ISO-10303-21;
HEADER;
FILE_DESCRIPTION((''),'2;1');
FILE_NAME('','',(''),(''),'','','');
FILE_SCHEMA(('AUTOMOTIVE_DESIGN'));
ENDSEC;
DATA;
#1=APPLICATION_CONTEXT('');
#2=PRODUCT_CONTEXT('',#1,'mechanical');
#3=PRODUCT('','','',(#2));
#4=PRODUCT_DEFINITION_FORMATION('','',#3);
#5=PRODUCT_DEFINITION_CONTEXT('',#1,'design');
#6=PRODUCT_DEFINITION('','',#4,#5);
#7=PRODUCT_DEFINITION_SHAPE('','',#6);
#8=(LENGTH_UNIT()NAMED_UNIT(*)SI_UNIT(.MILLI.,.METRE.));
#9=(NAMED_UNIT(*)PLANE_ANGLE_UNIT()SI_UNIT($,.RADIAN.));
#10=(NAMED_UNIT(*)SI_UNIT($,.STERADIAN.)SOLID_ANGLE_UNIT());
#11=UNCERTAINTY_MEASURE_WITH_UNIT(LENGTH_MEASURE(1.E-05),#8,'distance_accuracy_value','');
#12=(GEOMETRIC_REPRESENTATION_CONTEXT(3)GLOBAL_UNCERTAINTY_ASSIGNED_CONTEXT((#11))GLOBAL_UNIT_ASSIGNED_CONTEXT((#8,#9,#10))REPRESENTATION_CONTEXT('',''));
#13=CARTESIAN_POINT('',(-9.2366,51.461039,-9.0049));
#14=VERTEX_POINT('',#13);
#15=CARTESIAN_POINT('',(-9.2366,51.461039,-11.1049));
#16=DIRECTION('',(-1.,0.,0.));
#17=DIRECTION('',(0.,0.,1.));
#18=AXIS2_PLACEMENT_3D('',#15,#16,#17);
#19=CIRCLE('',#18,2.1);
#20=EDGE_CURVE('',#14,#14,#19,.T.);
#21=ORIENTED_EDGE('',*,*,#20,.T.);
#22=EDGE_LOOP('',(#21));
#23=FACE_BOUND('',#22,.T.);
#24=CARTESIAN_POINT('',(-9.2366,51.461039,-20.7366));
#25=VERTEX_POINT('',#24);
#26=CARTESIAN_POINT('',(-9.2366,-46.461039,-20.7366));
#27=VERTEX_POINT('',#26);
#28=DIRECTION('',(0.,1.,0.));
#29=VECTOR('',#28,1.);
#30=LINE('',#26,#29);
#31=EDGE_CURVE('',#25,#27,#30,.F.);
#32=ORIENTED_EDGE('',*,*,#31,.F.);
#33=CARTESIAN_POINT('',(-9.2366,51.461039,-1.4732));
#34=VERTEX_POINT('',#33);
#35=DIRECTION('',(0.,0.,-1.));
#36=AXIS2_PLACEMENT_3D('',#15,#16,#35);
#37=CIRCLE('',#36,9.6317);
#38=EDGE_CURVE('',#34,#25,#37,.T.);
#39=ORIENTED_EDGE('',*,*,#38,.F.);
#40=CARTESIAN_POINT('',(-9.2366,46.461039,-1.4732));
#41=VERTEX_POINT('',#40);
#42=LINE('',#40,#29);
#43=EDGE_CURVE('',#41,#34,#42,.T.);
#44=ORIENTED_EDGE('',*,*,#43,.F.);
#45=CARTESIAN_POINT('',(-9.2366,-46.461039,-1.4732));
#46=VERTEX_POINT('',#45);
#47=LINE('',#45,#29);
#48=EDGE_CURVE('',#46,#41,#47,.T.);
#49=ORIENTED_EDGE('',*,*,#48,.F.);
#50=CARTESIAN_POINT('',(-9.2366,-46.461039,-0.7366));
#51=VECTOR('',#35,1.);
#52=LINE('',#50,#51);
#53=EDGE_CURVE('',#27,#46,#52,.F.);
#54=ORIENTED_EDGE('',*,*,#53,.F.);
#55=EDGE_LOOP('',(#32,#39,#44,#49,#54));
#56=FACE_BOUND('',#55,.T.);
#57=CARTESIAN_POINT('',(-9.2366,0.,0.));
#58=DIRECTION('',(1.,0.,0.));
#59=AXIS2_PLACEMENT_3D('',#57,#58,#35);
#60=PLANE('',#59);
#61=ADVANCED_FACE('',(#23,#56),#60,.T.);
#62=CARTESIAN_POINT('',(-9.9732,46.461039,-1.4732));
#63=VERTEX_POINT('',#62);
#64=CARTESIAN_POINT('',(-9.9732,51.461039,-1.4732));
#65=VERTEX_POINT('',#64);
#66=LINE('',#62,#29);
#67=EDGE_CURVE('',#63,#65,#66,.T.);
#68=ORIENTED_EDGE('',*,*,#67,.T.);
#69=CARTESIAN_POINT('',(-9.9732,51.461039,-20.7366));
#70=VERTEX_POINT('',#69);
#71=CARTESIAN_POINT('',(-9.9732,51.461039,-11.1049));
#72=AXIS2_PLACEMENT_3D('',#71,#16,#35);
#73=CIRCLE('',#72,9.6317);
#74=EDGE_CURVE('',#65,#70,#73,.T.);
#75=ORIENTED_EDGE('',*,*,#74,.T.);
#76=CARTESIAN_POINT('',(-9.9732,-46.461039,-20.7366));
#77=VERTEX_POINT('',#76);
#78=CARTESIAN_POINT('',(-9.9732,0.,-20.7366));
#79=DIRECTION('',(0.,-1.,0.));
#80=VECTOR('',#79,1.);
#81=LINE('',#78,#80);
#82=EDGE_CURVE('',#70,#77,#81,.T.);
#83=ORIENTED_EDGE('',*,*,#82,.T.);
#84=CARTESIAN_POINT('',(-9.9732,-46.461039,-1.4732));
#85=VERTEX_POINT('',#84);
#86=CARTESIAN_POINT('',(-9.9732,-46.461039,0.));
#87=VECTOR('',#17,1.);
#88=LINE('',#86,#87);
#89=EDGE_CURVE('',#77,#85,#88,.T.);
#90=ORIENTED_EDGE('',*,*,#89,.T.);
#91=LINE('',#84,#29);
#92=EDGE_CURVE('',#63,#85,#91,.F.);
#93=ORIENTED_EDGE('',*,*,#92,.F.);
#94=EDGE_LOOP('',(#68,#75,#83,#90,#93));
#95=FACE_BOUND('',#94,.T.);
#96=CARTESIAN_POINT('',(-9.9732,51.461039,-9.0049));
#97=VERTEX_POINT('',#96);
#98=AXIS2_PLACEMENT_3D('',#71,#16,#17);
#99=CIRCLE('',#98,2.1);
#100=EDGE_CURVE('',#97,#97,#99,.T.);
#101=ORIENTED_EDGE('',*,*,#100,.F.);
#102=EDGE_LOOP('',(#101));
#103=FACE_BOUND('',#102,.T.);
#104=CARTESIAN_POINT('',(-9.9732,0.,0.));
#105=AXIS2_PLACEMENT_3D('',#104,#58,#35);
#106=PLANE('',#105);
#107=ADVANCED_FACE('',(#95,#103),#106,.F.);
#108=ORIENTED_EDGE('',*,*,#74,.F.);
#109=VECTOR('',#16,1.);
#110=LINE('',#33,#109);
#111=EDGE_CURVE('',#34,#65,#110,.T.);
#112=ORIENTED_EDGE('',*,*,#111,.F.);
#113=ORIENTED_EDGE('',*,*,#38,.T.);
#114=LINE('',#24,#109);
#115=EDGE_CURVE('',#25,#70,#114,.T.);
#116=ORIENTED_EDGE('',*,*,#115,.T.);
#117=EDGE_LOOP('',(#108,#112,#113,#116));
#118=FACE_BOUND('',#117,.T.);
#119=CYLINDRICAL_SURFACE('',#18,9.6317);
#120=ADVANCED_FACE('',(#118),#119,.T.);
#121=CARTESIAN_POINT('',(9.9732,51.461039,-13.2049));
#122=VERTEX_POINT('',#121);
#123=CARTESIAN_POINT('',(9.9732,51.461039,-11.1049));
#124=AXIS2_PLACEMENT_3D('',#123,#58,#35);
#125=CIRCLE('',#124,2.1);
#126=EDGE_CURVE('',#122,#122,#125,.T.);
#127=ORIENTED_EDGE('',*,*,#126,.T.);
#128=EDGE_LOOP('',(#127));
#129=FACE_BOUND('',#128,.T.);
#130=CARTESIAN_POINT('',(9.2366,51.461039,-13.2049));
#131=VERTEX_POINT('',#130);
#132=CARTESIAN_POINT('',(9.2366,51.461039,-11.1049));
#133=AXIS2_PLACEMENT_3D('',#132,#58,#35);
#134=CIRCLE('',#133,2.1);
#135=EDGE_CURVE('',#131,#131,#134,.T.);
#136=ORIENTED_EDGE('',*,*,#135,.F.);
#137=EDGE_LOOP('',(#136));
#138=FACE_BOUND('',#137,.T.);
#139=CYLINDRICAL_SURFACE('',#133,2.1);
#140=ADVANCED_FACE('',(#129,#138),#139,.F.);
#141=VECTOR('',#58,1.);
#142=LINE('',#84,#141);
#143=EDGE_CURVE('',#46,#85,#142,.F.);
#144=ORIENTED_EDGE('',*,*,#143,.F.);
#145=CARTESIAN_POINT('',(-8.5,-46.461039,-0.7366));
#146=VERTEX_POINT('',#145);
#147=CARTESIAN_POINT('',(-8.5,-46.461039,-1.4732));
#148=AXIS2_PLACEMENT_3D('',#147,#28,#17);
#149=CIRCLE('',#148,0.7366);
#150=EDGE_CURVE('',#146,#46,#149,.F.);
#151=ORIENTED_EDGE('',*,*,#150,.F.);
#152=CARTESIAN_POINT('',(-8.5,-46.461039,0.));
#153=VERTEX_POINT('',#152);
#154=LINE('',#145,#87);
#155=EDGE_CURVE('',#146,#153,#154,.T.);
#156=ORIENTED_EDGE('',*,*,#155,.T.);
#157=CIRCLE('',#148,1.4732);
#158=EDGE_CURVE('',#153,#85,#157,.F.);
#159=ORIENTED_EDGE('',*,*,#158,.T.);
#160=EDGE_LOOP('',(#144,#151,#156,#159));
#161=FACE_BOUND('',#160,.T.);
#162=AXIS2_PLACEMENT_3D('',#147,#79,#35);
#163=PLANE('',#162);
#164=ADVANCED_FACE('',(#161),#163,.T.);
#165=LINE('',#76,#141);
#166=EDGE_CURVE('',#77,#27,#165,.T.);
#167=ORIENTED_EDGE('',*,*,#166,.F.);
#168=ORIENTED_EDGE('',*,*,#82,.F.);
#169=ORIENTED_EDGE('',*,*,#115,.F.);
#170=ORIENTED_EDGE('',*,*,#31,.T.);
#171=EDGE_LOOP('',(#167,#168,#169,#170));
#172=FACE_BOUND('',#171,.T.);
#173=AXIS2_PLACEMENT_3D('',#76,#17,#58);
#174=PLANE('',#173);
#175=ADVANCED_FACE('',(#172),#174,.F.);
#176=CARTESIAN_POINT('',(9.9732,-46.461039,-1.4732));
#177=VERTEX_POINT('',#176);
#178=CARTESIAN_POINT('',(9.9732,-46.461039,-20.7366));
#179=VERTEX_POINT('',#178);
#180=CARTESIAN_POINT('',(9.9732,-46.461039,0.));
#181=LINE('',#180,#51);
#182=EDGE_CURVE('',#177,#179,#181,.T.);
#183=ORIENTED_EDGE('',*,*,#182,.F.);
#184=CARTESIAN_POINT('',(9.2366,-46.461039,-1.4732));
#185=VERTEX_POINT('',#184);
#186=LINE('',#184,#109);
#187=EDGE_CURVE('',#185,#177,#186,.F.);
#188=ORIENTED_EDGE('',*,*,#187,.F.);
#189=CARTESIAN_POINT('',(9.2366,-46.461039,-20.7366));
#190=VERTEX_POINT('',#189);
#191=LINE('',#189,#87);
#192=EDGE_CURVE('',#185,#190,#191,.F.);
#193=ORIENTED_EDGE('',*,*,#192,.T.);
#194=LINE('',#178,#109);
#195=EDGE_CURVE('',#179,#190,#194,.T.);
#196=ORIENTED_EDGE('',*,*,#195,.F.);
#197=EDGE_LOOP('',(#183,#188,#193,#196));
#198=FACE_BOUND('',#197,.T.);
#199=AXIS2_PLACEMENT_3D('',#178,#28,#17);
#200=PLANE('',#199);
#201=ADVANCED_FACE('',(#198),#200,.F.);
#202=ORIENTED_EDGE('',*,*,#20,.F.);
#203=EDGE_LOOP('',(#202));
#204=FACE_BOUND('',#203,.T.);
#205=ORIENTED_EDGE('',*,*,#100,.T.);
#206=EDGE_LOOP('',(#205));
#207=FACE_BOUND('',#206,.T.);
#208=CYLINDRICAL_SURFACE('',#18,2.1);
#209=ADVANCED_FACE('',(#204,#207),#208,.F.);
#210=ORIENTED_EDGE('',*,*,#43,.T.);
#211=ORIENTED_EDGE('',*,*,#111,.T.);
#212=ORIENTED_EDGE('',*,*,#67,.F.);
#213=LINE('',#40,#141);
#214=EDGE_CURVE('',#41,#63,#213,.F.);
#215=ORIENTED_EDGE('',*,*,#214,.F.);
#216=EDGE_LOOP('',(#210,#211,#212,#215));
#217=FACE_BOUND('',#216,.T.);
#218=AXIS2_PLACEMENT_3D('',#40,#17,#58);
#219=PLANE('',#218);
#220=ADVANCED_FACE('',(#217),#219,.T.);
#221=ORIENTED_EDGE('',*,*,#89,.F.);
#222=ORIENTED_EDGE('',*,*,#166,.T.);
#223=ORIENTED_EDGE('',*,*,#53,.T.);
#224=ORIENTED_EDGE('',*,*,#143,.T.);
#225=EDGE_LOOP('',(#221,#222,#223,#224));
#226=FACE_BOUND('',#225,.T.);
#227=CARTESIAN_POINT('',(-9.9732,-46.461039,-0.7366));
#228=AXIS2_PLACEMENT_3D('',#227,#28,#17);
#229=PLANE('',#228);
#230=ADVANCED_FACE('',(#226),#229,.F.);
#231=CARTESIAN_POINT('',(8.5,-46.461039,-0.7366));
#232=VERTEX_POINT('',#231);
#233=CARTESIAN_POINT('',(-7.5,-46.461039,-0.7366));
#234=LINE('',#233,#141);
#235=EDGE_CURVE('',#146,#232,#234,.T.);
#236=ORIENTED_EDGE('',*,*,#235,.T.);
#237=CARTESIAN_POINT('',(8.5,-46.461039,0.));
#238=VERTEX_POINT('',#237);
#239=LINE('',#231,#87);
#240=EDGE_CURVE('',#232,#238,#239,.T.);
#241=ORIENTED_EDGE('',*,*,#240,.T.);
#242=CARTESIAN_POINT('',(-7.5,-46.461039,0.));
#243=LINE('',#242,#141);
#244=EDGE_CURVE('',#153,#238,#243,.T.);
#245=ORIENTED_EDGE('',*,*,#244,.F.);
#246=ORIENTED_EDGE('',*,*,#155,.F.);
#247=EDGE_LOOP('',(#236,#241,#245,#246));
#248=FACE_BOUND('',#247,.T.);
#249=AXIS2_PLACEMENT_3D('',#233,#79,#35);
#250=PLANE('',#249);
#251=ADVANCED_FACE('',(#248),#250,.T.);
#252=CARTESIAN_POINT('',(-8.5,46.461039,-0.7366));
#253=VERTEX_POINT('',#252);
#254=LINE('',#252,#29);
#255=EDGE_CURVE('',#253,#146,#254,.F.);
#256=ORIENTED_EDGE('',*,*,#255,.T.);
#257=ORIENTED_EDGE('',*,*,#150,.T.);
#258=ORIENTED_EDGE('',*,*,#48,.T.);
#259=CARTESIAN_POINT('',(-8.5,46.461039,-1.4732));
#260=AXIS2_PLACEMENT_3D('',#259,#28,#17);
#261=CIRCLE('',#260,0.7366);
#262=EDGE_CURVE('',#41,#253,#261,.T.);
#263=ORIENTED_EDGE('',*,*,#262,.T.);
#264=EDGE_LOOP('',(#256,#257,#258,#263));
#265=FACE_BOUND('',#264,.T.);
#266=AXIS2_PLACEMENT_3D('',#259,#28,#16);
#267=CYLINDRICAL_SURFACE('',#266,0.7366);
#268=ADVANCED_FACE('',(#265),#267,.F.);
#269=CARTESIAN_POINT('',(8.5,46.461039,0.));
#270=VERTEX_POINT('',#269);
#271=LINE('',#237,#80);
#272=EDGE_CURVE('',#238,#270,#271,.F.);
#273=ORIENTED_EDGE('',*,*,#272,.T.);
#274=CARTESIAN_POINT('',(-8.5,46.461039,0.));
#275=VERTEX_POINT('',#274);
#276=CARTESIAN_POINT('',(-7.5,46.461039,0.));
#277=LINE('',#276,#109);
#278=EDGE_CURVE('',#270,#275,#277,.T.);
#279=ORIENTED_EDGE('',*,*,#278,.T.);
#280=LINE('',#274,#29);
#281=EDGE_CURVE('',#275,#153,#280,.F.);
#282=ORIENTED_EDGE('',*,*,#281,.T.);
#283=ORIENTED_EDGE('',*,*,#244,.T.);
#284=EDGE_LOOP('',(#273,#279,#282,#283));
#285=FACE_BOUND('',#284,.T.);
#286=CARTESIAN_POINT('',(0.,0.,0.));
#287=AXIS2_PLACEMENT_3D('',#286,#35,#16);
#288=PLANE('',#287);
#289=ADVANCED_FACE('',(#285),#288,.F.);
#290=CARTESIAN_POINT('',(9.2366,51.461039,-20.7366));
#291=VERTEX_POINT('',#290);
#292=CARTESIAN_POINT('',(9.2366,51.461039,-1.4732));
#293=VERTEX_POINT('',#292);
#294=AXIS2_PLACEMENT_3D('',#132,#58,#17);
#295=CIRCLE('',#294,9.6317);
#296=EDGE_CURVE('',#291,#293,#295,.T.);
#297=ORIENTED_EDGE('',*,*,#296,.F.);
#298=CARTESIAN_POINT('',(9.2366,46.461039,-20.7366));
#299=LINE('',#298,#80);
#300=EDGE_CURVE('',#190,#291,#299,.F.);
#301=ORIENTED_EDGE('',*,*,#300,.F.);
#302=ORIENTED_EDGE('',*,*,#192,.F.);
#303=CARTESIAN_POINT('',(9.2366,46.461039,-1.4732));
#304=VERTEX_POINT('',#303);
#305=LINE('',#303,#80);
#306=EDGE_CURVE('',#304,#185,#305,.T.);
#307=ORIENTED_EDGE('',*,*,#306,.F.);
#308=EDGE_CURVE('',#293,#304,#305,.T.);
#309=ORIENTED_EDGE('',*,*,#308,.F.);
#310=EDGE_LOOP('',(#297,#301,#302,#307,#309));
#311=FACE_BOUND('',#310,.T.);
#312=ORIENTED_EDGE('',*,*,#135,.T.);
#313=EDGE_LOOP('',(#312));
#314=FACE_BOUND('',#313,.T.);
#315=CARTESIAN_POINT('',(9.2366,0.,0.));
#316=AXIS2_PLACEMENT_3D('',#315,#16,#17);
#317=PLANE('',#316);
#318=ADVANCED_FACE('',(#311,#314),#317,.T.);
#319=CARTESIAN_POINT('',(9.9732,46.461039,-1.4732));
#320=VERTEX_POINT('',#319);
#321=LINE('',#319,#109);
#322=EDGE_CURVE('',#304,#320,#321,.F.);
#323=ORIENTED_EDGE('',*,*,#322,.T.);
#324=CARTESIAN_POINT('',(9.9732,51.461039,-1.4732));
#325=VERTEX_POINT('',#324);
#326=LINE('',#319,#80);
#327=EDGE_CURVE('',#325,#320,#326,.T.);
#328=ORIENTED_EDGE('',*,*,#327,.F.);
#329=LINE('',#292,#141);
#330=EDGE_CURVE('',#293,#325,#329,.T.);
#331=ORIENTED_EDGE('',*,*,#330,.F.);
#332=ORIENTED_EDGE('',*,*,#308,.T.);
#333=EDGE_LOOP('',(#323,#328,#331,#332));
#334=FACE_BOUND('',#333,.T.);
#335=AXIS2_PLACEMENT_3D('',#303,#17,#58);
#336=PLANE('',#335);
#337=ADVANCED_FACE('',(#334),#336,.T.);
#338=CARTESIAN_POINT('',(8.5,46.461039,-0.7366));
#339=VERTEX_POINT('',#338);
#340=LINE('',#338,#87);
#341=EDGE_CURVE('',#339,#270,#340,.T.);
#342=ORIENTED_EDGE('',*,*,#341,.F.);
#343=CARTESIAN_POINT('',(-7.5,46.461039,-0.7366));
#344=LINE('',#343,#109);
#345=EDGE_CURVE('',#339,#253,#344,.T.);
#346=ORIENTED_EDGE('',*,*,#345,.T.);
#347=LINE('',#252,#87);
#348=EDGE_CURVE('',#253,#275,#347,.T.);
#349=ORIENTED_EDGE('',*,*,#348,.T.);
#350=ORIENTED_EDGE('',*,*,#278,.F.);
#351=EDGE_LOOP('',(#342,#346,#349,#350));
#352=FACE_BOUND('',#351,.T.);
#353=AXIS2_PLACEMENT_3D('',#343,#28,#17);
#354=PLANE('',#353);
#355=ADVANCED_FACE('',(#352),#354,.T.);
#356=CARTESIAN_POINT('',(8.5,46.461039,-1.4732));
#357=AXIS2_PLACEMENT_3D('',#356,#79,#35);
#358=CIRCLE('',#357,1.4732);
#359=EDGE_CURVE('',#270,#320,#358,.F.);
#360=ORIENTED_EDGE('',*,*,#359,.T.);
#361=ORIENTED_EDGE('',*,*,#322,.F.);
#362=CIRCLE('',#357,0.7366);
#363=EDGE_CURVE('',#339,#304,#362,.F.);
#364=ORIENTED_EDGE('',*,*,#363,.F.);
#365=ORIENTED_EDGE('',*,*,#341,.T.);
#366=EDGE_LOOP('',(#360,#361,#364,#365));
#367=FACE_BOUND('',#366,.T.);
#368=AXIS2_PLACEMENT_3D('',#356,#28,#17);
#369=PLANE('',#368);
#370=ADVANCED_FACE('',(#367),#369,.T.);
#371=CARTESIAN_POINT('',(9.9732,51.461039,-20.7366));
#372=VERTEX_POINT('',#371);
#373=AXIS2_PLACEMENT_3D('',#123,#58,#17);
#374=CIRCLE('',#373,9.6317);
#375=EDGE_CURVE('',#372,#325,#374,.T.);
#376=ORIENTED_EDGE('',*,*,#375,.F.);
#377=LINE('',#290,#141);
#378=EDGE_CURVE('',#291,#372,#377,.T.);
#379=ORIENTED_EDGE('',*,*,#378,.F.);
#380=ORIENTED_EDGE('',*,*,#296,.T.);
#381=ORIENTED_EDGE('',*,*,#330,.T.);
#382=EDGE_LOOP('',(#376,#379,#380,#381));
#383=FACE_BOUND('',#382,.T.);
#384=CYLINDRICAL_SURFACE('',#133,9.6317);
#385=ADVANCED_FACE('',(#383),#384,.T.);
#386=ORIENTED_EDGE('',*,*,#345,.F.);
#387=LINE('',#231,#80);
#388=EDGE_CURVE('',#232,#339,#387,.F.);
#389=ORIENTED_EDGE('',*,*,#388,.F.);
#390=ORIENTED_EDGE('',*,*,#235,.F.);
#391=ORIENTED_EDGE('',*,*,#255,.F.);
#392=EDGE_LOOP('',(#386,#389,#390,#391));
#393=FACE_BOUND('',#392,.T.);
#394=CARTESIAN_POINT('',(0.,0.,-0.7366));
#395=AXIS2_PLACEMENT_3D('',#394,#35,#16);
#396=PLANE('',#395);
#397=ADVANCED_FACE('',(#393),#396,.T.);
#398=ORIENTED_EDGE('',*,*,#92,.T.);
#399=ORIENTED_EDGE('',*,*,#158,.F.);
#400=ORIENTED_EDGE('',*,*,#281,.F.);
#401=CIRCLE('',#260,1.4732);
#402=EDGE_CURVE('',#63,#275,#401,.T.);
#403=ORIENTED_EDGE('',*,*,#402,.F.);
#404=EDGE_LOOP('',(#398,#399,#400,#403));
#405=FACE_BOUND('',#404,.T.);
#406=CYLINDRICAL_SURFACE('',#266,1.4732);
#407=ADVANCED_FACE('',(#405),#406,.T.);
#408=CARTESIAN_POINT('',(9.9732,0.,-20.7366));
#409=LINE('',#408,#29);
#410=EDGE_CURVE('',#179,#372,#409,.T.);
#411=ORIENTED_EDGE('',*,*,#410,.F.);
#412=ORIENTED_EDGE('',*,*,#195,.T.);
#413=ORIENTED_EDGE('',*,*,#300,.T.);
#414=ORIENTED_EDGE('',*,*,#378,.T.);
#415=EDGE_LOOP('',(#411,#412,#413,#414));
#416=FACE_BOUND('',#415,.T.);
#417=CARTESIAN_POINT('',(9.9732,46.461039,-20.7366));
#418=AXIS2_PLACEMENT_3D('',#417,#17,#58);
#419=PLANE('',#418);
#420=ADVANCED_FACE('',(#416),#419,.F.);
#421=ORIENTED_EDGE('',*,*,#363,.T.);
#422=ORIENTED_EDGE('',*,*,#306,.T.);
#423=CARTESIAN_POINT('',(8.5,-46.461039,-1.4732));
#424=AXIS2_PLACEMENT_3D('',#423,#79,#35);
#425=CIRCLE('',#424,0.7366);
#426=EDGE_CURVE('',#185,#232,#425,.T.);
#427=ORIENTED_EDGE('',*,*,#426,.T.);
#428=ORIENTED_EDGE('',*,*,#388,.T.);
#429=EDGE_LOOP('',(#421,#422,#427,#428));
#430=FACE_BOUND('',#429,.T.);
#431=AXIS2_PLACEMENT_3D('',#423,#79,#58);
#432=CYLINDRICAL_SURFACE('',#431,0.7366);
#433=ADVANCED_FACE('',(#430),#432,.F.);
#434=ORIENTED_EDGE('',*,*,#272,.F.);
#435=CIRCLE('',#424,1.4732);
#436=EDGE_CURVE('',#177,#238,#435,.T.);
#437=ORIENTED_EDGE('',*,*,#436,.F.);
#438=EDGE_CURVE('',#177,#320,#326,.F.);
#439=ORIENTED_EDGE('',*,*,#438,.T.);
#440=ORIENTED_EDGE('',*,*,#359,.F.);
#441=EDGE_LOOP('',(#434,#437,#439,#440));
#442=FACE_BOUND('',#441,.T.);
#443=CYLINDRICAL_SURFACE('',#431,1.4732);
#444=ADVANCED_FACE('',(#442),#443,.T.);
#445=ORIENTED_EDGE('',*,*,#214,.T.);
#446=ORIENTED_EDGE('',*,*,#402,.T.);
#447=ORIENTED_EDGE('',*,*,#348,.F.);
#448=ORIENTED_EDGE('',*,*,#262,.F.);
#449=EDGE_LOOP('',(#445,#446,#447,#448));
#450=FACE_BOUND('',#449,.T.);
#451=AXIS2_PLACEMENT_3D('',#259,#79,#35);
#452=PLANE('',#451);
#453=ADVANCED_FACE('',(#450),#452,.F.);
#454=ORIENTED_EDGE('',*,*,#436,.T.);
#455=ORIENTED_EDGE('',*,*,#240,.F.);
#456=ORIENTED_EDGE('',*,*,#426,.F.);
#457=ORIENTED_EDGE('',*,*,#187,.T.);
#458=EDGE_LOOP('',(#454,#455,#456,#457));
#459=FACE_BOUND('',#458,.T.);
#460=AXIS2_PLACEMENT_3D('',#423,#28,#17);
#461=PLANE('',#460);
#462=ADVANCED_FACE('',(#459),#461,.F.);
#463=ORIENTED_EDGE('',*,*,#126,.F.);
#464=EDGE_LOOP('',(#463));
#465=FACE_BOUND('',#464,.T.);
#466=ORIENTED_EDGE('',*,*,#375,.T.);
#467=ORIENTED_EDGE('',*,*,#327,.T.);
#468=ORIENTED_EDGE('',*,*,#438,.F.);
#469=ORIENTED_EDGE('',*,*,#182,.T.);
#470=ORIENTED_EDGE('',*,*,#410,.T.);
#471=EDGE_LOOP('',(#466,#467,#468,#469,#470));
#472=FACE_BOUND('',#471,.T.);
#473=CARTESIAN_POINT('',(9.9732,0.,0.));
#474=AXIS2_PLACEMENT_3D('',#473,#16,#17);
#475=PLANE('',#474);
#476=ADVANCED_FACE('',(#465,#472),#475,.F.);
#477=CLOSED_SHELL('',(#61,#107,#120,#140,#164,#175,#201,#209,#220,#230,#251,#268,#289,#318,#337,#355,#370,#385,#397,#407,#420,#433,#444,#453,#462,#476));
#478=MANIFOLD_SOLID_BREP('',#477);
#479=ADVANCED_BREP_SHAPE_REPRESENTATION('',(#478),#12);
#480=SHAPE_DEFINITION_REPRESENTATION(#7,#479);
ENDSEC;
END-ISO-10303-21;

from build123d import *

# Parameters (mm, degrees)
SKETCH1_W               = 15
SKETCH1_H               = 92.922077922
BASE_FLANGE1_DEPTH      = 0.7366
EDGE_FLANGE2_DEPTH      = 92.922077922
EDGE_FLANGE2_BEND_DEPTH = 92.922077922
SKETCH31_R              = 2.1
TAB3_DEPTH              = 0.7366
TAB4_START              = -0.7366
SKETCH35_R              = 2.1
TAB4_DEPTH              = 0.7366


# Sheet-metal steps are written as plain solids
with BuildPart() as part:
    # Sketch1 → Base-Flange1 (new body)
    with BuildSketch(Plane.XY):
        Rectangle(SKETCH1_W, SKETCH1_H)
    extrude(amount=-BASE_FLANGE1_DEPTH)

    # Edge-Flange2 section (across the edge) → Edge-Flange2 (add)
    with BuildSketch(Plane(origin=(9.2366, 46.461038961, -0.7366), x_dir=(-1, 0, 0), z_dir=(0, -1, 0))):
        with BuildLine():
            Line((-0.7366, 0.7366), (-0.7366, 20))
            Line((-0.7366, 20), (0, 20))
            Line((0, 20), (0, 0.7366))
            ThreePointArc((0, 0.7366), (0.215745145, 0.215745145), (0.7366, 0))
            Line((0.7366, 0), (1.7366, 0))
            Line((1.7366, 0), (1.7366, -0.7366))
            Line((1.7366, -0.7366), (0.7366, -0.7366))
            ThreePointArc((0.7366, -0.7366), (-0.30510971, -0.30510971), (-0.7366, 0.7366))
        make_face()
    extrude(amount=EDGE_FLANGE2_DEPTH)

    # Edge-Flange2 section 2 (across the edge) → Edge-Flange2 bend (add)
    with BuildSketch(Plane(origin=(-9.2366, -46.461038961, -0.7366), x_dir=(1, 0, 0), z_dir=(0, 1, 0))):
        with BuildLine():
            Line((-0.7366, 0.7366), (-0.7366, 20))
            Line((-0.7366, 20), (0, 20))
            Line((0, 20), (0, 0.7366))
            ThreePointArc((0, 0.7366), (0.215745145, 0.215745145), (0.7366, 0))
            Line((0.7366, 0), (1.7366, 0))
            Line((1.7366, 0), (1.7366, -0.7366))
            Line((1.7366, -0.7366), (0.7366, -0.7366))
            ThreePointArc((0.7366, -0.7366), (-0.30510971, -0.30510971), (-0.7366, 0.7366))
        make_face()
    extrude(amount=EDGE_FLANGE2_BEND_DEPTH)

    # Sketch31 → Tab3 (add)
    with BuildSketch(Plane(origin=(9.9732, 0, 0), x_dir=(0, 0, -1), z_dir=(1, 0, 0))):
        with BuildLine():
            Line((1.4732, 46.461038961), (1.4732, 51.461038961))
            ThreePointArc((1.4732, 51.461038961), (11.1049, 61.092738961), (20.7366, 51.461038961))
            Line((20.7366, 51.461038961), (20.7366, 46.461038961))
            Line((20.7366, 46.461038961), (1.4732, 46.461038961))
        make_face()
        with Locations((11.1049, 51.461038961)):
            Circle(SKETCH31_R, mode=Mode.SUBTRACT)
    extrude(amount=-TAB3_DEPTH)

    # Sketch35 → Tab4 (add)
    with BuildSketch(Plane.ZY.offset(9.9732).offset(TAB4_START)):
        with BuildLine():
            Line((-20.7366, 46.461038961), (-20.7366, 51.461038961))
            ThreePointArc((-20.7366, 51.461038961), (-11.1049, 61.092738961), (-1.4732, 51.461038961))
            Line((-1.4732, 51.461038961), (-1.4732, 46.461038961))
            Line((-1.4732, 46.461038961), (-20.7366, 46.461038961))
        make_face()
        with Locations(Location((-11.1049, 51.461038961, 0), (0, 0, 180))):
            Circle(SKETCH35_R, mode=Mode.SUBTRACT)
    extrude(amount=TAB4_DEPTH)


solid = part.part
